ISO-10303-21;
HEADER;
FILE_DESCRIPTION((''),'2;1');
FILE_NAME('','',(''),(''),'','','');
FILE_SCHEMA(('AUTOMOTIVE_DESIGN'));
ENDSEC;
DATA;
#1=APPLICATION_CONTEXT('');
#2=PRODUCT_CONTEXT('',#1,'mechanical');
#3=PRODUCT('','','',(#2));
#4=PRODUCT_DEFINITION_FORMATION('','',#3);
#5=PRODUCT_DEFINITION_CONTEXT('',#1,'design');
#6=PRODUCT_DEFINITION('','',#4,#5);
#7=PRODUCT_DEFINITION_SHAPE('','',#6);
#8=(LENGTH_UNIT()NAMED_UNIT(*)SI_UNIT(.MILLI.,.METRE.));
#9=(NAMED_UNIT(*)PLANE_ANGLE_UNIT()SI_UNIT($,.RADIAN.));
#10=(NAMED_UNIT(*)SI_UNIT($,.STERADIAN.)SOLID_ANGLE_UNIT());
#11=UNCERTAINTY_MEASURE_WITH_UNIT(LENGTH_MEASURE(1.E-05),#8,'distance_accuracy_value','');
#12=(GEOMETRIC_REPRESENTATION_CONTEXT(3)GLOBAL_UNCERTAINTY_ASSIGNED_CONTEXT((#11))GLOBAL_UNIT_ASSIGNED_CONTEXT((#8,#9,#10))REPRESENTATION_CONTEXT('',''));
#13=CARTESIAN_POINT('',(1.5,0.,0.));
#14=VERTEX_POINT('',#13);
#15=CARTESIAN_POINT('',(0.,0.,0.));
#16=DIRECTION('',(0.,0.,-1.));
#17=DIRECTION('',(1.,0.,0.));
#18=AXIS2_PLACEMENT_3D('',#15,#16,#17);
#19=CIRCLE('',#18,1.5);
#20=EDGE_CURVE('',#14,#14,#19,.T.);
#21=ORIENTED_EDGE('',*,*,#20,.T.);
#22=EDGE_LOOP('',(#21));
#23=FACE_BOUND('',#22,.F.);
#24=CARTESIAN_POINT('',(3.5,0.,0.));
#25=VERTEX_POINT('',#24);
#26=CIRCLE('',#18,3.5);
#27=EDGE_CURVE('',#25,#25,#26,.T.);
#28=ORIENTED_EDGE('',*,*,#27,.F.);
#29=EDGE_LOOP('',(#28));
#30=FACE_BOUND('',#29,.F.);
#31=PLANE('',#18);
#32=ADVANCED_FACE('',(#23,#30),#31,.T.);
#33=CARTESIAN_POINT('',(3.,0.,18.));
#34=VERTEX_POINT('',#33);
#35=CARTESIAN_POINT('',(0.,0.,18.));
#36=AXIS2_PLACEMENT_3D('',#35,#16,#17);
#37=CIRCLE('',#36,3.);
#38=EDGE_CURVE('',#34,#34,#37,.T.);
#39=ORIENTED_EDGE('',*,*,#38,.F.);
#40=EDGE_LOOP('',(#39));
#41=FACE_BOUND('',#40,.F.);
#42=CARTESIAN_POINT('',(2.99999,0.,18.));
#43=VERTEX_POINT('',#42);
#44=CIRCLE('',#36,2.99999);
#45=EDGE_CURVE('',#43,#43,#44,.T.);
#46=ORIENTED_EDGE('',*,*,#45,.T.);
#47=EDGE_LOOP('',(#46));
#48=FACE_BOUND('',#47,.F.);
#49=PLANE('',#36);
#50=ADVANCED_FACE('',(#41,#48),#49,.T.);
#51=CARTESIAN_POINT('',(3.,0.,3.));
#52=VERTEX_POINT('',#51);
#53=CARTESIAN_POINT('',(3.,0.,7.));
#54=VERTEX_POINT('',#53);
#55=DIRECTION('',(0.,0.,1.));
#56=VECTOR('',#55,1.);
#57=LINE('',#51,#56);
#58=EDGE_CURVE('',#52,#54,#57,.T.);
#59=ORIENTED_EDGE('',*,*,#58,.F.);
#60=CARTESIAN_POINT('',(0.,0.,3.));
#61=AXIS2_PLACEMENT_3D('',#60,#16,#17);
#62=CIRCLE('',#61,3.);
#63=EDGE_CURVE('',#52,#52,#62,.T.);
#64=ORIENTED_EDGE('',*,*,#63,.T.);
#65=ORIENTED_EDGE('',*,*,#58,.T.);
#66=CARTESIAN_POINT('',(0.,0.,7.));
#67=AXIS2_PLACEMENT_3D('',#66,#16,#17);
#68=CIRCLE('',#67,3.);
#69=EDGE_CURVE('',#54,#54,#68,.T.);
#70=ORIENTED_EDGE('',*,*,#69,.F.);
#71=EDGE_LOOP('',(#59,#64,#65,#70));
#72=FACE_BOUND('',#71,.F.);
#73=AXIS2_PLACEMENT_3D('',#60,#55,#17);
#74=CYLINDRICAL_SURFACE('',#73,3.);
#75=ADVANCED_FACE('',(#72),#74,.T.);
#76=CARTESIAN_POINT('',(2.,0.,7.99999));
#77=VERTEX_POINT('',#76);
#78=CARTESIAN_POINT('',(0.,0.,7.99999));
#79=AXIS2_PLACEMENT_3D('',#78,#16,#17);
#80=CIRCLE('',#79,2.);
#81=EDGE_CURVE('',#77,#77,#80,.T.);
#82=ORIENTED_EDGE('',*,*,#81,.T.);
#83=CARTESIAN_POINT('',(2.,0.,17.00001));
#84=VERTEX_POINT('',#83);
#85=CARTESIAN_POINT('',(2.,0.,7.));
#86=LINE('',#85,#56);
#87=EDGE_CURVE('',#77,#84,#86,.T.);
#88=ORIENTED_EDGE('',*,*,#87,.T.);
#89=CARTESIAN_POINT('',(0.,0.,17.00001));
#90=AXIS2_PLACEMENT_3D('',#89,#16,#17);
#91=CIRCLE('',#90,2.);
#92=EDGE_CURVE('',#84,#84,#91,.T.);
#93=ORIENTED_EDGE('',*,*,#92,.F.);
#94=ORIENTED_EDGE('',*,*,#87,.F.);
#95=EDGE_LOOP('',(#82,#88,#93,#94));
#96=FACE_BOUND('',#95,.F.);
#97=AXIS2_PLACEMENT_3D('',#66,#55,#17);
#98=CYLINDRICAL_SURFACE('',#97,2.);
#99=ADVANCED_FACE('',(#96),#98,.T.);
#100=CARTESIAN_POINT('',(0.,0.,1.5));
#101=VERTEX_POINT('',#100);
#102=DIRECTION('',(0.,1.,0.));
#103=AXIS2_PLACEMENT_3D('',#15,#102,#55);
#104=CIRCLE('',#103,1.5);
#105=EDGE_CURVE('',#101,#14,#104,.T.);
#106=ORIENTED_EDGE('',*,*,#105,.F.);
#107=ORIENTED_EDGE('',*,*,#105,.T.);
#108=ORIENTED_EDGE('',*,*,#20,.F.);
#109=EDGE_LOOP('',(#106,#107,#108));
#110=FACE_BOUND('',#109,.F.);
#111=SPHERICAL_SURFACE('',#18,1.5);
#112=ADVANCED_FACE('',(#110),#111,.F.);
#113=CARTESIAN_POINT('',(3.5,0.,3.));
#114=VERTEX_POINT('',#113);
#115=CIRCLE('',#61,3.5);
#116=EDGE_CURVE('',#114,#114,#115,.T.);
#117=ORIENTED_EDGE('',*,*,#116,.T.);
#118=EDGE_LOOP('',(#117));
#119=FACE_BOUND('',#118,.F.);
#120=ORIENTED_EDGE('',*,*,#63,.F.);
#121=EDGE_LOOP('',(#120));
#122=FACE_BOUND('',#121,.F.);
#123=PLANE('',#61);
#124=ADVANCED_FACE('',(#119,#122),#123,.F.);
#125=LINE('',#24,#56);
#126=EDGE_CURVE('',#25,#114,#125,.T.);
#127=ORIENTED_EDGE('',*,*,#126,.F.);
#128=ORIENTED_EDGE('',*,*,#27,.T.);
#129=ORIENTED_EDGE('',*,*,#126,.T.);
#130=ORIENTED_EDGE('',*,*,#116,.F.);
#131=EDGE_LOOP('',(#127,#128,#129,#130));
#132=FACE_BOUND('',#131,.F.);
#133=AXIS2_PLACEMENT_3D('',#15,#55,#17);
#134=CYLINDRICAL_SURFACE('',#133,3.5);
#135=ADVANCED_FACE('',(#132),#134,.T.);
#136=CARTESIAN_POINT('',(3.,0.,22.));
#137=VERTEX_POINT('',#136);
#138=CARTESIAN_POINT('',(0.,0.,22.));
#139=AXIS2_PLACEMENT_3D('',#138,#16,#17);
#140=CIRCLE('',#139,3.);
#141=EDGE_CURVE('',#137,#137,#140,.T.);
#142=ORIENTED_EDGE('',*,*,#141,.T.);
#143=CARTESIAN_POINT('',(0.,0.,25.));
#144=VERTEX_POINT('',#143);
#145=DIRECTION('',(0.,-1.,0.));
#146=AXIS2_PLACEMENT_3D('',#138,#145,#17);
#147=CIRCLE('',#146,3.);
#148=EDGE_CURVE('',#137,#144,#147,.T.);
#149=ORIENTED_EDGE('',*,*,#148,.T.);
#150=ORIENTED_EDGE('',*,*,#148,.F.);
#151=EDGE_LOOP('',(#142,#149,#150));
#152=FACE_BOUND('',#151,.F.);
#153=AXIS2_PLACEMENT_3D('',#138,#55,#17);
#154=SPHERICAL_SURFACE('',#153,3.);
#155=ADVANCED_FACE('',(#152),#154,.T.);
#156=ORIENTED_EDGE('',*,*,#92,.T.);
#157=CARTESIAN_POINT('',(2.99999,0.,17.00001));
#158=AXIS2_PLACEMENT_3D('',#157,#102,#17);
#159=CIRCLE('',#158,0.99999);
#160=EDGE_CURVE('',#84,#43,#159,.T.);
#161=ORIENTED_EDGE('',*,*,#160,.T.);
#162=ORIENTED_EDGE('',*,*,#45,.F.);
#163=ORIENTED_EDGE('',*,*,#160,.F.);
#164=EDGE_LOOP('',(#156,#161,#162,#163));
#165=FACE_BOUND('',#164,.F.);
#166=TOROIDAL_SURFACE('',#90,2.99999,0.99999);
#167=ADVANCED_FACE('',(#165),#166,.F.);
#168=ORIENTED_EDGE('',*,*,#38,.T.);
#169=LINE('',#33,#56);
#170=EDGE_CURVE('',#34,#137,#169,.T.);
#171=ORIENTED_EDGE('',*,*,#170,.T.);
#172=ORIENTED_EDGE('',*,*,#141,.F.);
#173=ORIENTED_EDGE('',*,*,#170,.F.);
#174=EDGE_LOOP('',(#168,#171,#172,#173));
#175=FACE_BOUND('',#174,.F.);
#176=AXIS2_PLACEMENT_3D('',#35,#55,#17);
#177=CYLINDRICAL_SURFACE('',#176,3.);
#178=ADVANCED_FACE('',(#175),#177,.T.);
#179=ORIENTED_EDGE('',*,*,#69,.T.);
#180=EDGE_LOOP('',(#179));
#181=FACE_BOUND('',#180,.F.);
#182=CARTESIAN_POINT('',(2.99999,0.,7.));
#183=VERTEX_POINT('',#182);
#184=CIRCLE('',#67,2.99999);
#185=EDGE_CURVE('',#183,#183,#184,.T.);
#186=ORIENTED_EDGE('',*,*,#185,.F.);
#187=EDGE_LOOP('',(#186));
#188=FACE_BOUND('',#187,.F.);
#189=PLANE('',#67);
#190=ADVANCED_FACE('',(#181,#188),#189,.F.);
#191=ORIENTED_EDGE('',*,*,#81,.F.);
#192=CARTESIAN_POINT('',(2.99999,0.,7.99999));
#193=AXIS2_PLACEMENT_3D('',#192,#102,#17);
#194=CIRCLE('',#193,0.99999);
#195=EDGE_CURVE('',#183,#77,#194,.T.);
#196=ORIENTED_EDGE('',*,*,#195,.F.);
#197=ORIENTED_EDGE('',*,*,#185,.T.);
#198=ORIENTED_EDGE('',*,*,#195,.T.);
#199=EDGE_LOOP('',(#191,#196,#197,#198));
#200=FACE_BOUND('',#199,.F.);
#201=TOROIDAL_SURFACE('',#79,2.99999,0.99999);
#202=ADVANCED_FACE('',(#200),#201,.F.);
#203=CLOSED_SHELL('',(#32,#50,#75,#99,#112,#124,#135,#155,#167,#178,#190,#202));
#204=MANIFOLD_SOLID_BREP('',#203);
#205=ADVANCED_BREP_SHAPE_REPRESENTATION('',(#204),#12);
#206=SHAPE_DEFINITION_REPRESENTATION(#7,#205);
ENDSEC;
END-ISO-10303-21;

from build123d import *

# Parameters (mm, degrees)
F2_R = 0.99999


# Not quite as in the source:
# - a fillet or chamfer is up to 0.001 mm smaller than in the source, because OpenCascade refuses the exact size


with BuildPart() as f1:
    # F0 (on Front) → F1 (revolve)
    with BuildSketch(Plane.XZ):
        with BuildLine():
            Line((0, 25), (0, 22))
            Line((0, 22), (3, 22))
            ThreePointArc((3, 22), (2.1213203436, 24.1213203436), (0, 25))
        make_face()
        with BuildLine():
            ThreePointArc((0, 1.5), (1.0606601718, 1.0606601718), (1.5, 0))
            Line((1.5, 0), (3.5, 0))
            Line((3.5, 0), (3.5, 3))
            Line((3.5, 3), (3, 3))
            Line((3, 3), (3, 7))
            Line((3, 7), (2, 7))
            Line((2, 7), (2, 18))
            Line((2, 18), (3, 18))
            Line((3, 18), (3, 22))
            Line((3, 22), (0, 22))
            Line((0, 22), (0, 3))
            Line((0, 3), (0, 1.5))
        make_face()
    revolve(axis=Axis((0, 0, 13.25), (0, 0, -1)))

    # F2 (radius 1 in the source; OpenCascade refuses exactly that, so slightly less here)
    f2_edges = [f1.edges().sort_by_distance(p)[0] for p in [
        (-2, 0, 18),
        (-2, 0, 7),
    ]]
    fillet(f2_edges, radius=F2_R)


solid = f1.part
